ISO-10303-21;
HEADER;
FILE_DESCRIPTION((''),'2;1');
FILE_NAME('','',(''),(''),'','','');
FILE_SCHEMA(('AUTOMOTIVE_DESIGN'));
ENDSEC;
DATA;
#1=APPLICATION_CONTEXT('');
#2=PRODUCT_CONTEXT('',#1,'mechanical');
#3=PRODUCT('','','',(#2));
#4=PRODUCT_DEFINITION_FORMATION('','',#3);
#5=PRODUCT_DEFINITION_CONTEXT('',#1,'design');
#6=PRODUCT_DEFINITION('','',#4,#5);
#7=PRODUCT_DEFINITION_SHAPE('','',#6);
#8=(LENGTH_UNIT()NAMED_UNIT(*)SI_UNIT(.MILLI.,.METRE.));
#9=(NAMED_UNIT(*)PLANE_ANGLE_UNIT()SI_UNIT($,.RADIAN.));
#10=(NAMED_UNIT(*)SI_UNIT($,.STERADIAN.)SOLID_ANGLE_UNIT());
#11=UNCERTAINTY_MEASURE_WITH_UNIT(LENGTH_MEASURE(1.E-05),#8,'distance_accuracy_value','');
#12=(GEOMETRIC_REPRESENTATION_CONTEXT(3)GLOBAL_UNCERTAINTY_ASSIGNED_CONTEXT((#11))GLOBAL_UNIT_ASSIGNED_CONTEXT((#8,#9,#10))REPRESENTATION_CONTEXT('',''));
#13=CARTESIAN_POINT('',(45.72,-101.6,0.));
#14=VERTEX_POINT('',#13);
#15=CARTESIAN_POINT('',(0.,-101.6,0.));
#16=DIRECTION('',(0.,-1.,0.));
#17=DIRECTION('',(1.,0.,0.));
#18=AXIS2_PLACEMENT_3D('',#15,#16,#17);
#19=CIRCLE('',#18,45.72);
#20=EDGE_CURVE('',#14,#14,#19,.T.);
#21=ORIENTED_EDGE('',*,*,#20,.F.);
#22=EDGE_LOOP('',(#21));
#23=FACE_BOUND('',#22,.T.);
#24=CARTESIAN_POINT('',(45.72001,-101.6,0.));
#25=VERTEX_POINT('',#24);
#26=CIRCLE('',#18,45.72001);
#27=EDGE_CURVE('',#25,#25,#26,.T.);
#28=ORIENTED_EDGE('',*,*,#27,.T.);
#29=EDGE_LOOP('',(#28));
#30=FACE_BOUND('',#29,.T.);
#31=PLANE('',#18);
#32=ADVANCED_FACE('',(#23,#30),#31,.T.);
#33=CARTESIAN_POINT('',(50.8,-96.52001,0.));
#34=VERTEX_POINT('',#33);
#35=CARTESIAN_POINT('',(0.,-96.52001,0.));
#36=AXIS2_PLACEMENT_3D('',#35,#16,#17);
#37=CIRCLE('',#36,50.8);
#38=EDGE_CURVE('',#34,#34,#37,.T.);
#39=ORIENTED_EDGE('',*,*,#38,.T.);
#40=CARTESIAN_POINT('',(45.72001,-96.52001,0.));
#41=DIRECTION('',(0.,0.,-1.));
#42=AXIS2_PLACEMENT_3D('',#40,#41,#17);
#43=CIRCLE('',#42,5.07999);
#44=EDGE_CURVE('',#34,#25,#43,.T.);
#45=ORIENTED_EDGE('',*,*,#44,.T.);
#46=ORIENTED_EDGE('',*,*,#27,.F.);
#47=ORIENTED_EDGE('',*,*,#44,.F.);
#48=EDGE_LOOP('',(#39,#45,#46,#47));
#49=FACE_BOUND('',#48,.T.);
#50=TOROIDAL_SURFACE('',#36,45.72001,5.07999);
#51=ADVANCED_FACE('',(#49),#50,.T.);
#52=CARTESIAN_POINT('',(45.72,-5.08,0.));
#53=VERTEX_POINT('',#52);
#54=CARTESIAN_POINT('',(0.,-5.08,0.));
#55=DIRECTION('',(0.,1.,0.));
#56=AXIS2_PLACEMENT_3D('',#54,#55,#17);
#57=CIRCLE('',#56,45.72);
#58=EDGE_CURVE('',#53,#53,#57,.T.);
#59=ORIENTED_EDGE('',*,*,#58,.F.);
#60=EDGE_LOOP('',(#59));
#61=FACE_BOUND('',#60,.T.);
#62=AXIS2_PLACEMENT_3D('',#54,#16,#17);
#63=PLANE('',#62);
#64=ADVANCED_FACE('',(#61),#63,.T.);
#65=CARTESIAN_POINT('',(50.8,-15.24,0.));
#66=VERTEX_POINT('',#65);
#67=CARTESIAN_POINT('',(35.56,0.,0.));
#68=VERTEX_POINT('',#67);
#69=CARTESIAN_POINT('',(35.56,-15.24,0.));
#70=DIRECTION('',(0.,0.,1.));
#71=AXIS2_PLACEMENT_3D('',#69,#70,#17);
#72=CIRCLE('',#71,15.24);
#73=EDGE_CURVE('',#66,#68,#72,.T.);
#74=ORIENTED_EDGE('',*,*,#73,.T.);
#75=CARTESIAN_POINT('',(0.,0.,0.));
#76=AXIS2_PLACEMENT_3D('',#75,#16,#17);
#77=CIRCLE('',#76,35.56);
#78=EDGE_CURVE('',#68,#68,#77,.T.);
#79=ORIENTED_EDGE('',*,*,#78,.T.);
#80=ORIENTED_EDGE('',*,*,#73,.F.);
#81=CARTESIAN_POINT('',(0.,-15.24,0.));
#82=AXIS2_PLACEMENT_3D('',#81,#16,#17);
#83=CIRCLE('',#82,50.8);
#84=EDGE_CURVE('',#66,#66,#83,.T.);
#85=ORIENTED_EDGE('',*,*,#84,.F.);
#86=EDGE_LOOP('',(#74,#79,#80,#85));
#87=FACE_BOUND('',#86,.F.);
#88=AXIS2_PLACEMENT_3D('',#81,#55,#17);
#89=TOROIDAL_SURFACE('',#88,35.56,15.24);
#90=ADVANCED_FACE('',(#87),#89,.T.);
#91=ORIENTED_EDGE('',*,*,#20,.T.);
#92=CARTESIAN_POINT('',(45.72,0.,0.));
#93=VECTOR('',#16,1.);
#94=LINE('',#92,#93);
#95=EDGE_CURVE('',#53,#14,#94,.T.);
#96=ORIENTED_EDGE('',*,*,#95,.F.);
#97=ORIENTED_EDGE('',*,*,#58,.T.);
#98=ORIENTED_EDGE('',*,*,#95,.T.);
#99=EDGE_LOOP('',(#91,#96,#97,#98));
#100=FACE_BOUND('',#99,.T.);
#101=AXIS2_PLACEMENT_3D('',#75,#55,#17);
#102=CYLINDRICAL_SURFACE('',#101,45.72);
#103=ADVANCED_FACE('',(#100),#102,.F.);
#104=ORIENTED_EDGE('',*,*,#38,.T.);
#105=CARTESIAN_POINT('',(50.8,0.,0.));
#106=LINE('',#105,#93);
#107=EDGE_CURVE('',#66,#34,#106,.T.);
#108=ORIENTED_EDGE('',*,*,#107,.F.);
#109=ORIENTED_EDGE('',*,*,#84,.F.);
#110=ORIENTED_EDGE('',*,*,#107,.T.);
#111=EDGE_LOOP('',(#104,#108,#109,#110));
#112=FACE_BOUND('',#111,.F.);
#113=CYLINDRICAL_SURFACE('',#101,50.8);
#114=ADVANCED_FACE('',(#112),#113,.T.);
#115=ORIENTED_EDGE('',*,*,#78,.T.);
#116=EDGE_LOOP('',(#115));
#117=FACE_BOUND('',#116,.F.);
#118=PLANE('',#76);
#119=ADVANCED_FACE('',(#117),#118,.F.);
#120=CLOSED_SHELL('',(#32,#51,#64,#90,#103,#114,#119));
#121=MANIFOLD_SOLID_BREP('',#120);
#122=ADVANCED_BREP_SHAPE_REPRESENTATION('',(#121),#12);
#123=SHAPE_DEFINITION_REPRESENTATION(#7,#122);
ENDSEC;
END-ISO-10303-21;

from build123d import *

# Parameters (mm, degrees)
F0_R     = 50.8
F1_DEPTH = 101.6
F2_T     = -5.08
F3_R     = 15.24
F4_R     = 5.07999


# Not quite as in the source:
# - a fillet or chamfer is up to 0.001 mm smaller than in the source, because OpenCascade refuses the exact size


with BuildPart() as f1:
    # F0 (on Front) → F1 (new body)
    with BuildSketch(Plane.XZ):
        Circle(F0_R)
    extrude(amount=F1_DEPTH)

    # F2
    f2_openings = [f1.faces().sort_by_distance(p)[0] for p in [
        (0, -101.6, 0),
    ]]
    offset(amount=F2_T, openings=f2_openings)

    # F3
    f3_edges = [f1.edges().sort_by_distance(p)[0] for p in [
        (-50.8, 0, 0),
    ]]
    fillet(f3_edges, radius=F3_R)

    # F4 (radius 5.08 in the source; OpenCascade refuses exactly that, so slightly less here)
    f4_edges = [f1.edges().sort_by_distance(p)[0] for p in [
        (-50.8, -101.6, 0),
    ]]
    fillet(f4_edges, radius=F4_R)


solid = f1.part
